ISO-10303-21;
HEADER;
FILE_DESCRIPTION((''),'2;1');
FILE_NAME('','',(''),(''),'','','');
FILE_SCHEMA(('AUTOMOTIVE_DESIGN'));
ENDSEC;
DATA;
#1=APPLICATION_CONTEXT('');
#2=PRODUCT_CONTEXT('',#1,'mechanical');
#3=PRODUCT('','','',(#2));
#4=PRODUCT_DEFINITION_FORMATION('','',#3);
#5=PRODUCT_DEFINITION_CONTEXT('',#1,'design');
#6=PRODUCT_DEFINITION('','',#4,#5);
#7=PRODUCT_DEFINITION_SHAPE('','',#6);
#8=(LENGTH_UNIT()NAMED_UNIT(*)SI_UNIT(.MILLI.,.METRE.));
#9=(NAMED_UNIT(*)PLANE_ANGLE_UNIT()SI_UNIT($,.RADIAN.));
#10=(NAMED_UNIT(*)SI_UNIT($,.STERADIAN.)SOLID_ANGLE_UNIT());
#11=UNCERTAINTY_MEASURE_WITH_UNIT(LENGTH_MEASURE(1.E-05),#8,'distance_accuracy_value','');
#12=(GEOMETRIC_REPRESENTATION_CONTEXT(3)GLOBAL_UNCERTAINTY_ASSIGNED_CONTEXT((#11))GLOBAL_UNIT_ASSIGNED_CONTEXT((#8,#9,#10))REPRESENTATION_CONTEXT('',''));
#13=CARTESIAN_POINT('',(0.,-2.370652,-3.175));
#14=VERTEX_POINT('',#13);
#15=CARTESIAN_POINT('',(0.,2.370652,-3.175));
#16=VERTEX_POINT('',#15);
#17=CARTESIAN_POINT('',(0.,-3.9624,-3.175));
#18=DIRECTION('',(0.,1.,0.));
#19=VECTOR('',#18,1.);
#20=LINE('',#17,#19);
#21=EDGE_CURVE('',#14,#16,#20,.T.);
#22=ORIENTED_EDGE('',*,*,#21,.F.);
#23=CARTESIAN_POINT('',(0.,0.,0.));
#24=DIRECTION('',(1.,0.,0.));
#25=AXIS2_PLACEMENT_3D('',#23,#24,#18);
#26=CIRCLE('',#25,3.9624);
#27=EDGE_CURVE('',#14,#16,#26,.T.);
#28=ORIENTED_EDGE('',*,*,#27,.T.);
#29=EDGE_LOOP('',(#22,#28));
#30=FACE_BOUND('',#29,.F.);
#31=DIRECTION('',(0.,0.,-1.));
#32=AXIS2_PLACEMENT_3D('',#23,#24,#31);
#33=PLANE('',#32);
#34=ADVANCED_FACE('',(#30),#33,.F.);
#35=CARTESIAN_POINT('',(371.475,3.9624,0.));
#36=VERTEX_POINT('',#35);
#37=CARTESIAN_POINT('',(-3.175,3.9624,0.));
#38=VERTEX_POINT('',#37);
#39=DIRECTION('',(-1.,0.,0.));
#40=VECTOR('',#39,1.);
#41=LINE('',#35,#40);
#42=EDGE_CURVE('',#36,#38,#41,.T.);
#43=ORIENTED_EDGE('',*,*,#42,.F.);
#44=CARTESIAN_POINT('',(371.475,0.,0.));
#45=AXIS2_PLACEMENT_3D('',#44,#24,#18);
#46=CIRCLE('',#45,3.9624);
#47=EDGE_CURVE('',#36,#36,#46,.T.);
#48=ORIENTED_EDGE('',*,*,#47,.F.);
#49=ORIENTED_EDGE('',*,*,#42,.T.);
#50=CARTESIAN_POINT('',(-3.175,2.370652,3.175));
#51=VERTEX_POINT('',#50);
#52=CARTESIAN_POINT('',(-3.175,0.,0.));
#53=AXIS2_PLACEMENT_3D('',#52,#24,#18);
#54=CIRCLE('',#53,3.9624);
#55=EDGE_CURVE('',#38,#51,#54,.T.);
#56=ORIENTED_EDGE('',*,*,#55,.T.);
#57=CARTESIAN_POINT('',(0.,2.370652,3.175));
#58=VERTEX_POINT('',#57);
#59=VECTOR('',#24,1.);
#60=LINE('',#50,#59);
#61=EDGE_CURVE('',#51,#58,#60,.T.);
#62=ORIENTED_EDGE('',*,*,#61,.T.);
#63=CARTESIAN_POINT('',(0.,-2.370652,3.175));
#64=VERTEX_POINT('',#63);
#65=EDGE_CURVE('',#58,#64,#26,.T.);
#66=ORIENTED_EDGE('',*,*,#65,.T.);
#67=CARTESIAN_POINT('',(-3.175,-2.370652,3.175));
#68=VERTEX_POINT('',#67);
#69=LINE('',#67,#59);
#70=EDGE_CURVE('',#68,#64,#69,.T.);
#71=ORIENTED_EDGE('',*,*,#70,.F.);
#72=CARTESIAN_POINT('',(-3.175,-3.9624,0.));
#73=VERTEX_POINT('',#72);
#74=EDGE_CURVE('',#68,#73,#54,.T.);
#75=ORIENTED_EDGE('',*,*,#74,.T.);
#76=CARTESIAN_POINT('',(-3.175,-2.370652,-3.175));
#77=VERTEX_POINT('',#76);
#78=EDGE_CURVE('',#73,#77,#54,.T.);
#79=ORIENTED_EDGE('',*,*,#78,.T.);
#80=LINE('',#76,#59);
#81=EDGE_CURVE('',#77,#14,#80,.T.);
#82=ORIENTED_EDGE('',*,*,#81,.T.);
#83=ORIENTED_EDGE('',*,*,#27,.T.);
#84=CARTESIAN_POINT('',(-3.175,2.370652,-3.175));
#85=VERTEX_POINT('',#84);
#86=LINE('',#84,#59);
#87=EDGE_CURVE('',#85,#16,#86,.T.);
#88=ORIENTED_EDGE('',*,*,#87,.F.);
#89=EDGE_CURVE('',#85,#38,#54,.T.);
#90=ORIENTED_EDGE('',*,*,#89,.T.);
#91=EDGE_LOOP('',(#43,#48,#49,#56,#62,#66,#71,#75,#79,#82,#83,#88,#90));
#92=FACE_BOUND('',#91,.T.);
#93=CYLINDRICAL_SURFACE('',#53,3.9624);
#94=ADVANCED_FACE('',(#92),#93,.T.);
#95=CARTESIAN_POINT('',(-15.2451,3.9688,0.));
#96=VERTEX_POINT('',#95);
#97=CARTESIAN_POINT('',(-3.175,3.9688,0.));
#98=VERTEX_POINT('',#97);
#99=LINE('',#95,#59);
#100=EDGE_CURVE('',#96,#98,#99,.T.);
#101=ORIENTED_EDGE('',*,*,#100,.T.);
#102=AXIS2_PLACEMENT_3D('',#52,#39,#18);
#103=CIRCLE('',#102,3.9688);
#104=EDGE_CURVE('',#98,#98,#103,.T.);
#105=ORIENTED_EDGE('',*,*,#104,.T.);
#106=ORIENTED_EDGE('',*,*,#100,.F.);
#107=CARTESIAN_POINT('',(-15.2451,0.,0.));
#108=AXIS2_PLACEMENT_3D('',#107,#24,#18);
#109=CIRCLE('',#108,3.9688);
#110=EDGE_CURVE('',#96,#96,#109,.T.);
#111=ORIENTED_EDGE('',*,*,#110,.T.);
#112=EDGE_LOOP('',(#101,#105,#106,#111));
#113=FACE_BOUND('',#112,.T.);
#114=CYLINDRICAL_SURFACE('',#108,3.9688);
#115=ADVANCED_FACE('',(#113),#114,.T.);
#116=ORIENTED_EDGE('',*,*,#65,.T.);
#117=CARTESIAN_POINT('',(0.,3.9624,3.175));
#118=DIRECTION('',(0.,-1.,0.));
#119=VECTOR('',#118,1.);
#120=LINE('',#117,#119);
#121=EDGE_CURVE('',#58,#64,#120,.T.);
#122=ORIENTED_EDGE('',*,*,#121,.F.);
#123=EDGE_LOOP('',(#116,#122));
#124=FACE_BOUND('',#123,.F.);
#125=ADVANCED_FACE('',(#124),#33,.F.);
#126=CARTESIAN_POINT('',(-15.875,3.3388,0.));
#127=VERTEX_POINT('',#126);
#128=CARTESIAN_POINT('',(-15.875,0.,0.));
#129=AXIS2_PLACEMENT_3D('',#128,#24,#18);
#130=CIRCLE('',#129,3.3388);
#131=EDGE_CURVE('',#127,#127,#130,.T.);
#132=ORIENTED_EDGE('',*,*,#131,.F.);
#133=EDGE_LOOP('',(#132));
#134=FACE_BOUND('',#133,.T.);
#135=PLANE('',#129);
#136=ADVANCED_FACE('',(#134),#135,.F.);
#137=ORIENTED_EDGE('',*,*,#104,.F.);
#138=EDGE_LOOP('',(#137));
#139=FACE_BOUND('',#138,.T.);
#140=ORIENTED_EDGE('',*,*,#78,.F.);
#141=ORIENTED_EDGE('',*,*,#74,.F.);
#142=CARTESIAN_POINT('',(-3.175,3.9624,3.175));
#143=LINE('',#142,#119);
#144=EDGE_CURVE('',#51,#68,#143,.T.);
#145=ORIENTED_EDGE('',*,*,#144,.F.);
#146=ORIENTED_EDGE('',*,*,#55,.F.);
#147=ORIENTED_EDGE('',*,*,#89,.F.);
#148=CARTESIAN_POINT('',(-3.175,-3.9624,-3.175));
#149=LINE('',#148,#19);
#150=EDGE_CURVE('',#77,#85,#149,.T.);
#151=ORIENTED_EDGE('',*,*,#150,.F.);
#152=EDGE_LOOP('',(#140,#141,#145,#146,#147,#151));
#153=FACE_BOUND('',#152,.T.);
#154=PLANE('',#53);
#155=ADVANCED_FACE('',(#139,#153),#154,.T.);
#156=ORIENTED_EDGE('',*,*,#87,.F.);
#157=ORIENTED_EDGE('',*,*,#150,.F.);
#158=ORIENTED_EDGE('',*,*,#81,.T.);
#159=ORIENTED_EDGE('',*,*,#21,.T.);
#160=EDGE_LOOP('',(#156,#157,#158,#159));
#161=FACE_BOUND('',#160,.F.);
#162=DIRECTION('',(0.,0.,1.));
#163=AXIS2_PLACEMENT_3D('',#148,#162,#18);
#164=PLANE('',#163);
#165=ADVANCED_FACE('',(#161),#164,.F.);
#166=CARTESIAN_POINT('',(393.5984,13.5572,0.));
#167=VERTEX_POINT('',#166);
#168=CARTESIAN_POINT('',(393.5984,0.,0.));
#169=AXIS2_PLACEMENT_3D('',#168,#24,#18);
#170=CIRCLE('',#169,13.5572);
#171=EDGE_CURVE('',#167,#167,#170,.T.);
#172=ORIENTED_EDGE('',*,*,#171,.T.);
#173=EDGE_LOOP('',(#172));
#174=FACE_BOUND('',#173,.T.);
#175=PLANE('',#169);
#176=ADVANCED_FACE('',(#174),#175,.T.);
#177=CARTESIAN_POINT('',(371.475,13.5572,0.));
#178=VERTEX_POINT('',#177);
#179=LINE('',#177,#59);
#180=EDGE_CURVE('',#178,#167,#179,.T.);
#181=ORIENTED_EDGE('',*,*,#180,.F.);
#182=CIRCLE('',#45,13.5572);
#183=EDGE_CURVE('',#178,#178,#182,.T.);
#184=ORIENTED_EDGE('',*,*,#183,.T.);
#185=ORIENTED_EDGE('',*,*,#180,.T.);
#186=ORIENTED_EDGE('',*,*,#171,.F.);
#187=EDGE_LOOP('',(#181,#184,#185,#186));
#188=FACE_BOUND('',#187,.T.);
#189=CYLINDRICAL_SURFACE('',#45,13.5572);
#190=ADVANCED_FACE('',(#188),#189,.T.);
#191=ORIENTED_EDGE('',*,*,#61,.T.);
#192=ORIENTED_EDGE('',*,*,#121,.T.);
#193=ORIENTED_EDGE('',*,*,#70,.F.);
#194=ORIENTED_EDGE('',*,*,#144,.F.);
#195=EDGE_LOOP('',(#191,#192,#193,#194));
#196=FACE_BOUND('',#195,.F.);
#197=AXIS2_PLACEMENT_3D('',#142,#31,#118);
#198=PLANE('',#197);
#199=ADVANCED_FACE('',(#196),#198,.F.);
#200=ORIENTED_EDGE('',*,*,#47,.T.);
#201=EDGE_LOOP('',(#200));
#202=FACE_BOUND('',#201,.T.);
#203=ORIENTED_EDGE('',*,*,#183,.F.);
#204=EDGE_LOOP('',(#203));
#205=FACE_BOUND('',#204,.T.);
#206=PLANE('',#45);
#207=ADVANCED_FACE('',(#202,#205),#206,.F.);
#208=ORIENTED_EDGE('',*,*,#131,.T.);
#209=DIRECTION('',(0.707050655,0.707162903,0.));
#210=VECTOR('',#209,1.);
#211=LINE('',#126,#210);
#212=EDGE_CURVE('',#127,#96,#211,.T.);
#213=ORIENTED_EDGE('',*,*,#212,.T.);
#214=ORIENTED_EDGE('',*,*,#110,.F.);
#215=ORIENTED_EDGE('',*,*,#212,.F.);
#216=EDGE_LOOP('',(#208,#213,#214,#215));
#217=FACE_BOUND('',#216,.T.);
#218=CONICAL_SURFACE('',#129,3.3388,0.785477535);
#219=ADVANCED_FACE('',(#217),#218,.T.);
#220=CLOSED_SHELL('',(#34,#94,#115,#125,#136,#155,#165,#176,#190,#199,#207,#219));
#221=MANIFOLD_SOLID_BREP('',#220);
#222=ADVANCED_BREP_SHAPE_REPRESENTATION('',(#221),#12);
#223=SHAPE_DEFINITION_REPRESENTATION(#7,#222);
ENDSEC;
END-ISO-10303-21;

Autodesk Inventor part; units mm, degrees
sketch "Sketch_1" plane through (0, 0, 0) normal (0, 0, 1) x (1, 0, 0)
  line L0 (393.5984, 0) -> (-3.175, 0)
  line L1 (-3.175, 0) -> (-3.175, 3.9624)
  line L2 (-3.175, 3.9624) -> (371.475, 3.9624)
  line L3 (371.475, 3.9624) -> (371.475, 13.5572)
  line L4 (371.475, 13.5572) -> (393.5984, 13.5572)
  line L5 (393.5984, 13.5572) -> (393.5984, 0)
  line L6 (393.5984, 0) -> (-3.175, 0)
revolve "Revolution1" add sketch "Sketch_1" angle 360 about axis through (393.5984, 0, 0) along (1, 0, 0)
sketch "Sketch_3" plane through (0, 0, 0) normal (0, 0, 1) x (1, 0, 0)
  line L0 (-3.175, 0) -> (-15.875, 0)
  line L1 (-15.875, 0) -> (-15.875, 3.3388)
  line L2 (-15.875, 3.3388) -> (-15.2451, 3.9688)
  line L3 (-15.2451, 3.9688) -> (-3.175, 3.9688)
  line L4 (-3.175, 3.9688) -> (-3.175, 0)
  line L5 (-3.175, 0) -> (-15.875, 0)
revolve "Revolution2" add sketch "Sketch_3" angle 360 about axis through (-3.175, 0, 0) along (1, 0, 0)
thread "Thread1" size "5/16-20 UN" class "3A" standard "ANSI Unified Screw Threads" full length
sketch "Sketch_10" plane through (-3.175, 0, 0) normal (1, 0, 0) x (0, 0, -1)
  line L0 (-7.9248, 7.9248) -> (-7.9248, -7.9248)
  line L1 (-7.9248, -7.9248) -> (7.9248, -7.9248)
  line L2 (7.9248, -7.9248) -> (7.9248, 7.9248)
  line L3 (7.9248, 7.9248) -> (-7.9248, 7.9248)
  line L4 (-3.175, 3.9624) -> (-3.175, -3.9624)
  line L5 (-3.175, -3.9624) -> (3.175, -3.9624)
  line L6 (3.175, -3.9624) -> (3.175, 3.9624)
  line L7 (3.175, 3.9624) -> (-3.175, 3.9624)
extrude "Extrusion1" cut sketch "Sketch_10" along normal blind 3.175
ref_plane "rod_cp_XY" through (0, 0, 0) normal (1, 0, 0) x (0, 0, -1)
ref_plane "rod_cp_YZ" through (0, 0, 0) normal (0, 0, -1) x (0, 1, 0)
ref_plane "rod_cp_ZX" through (0, 0, 0) normal (0, 1, 0) x (1, 0, 0)
ref_plane "to_rod_clevis_XY" through (-15.875, 0, 0) normal (1, 0, 0) x (0, 0, -1)
ref_plane "to_rod_clevis_YZ" through (-15.875, 0, 0) normal (0, 0, -1) x (0, 1, 0)
ref_plane "to_rod_clevis_ZX" through (-15.875, 0, 0) normal (0, 1, 0) x (1, 0, 0)
ref_plane "rl2_XY" through (-3.175, 0, 0) normal (1, 0, 0) x (0, 0, -1)
ref_plane "rl2_YZ" through (-3.175, 0, 0) normal (0, 0, -1) x (0, 1, 0)
ref_plane "rl2_ZX" through (-3.175, 0, 0) normal (0, 1, 0) x (1, 0, 0)
ref_plane "rl1_XY" through (-15.875, 0, 0) normal (1, 0, 0) x (0, 0, -1)
ref_plane "rl1_YZ" through (-15.875, 0, 0) normal (0, 0, -1) x (0, 1, 0)
ref_plane "rl1_ZX" through (-15.875, 0, 0) normal (0, 1, 0) x (1, 0, 0)
ref_plane "thd1_XY" through (-15.875, 3.9688, 0) normal (1, 0, 0) x (0, 0, -1)
ref_plane "thd1_YZ" through (-15.875, 3.9688, 0) normal (0, 0, -1) x (0, 1, 0)
ref_plane "thd1_ZX" through (-15.875, 3.9688, 0) normal (0, 1, 0) x (1, 0, 0)
ref_plane "thd2_XY" through (-15.875, -3.9688, 0) normal (1, 0, 0) x (0, 0, -1)
ref_plane "thd2_YZ" through (-15.875, -3.9688, 0) normal (0, 0, -1) x (0, 1, 0)
ref_plane "thd2_ZX" through (-15.875, -3.9688, 0) normal (0, 1, 0) x (1, 0, 0)
ref_plane "dia1_XY" through (-3.175, 3.9624, 0) normal (1, 0, 0) x (0, 0, -1)
ref_plane "dia1_YZ" through (-3.175, 3.9624, 0) normal (0, 0, -1) x (0, 1, 0)
ref_plane "dia1_ZX" through (-3.175, 3.9624, 0) normal (0, 1, 0) x (1, 0, 0)
ref_plane "dia2_XY" through (-3.175, -3.9624, 0) normal (1, 0, 0) x (0, 0, -1)
ref_plane "dia2_YZ" through (-3.175, -3.9624, 0) normal (0, 0, -1) x (0, 1, 0)
ref_plane "dia2_ZX" through (-3.175, -3.9624, 0) normal (0, 1, 0) x (1, 0, 0)
ref_plane "wf1_XY" through (-3.175, 0, 0) normal (1, 0, 0) x (0, 0, -1)
ref_plane "wf1_YZ" through (-3.175, 0, 0) normal (0, 0, -1) x (0, 1, 0)
ref_plane "wf1_ZX" through (-3.175, 0, 0) normal (0, 1, 0) x (1, 0, 0)
ref_plane "wf2_XY" through (0, 0, 0) normal (1, 0, 0) x (0, 0, -1)
ref_plane "wf2_YZ" through (0, 0, 0) normal (0, 0, -1) x (0, 1, 0)
ref_plane "wf2_ZX" through (0, 0, 0) normal (0, 1, 0) x (1, 0, 0)
ref_plane "hh1_XY" through (421.3606, 0, 0) normal (0, 0, 1) x (1, 0, 0)
ref_plane "hh1_YZ" through (421.3606, 0, 0) normal (1, 0, 0) x (0, 1, 0)
ref_plane "hh1_ZX" through (421.3606, 0, 0) normal (0, 1, 0) x (0, 0, 1)
ref_plane "hh2_XY" through (427.7614, 0, 0) normal (0, 0, 1) x (1, 0, 0)
ref_plane "hh2_YZ" through (427.7614, 0, 0) normal (1, 0, 0) x (0, 1, 0)
ref_plane "hh2_ZX" through (427.7614, 0, 0) normal (0, 1, 0) x (0, 0, 1)
ref_plane "dia12_XY" through (0, 0, 14.1351) normal (1, 0, 0) x (0, 0, -1)
ref_plane "dia12_YZ" through (0, 0, 14.1351) normal (0, 0, -1) x (0, 1, 0)
ref_plane "dia12_ZX" through (0, 0, 14.1351) normal (0, 1, 0) x (1, 0, 0)
ref_plane "dia22_XY" through (0, 0, -14.1351) normal (1, 0, 0) x (0, 0, -1)
ref_plane "dia22_YZ" through (0, 0, -14.1351) normal (0, 0, -1) x (0, 1, 0)
ref_plane "dia22_ZX" through (0, 0, -14.1351) normal (0, 1, 0) x (1, 0, 0)
ref_plane "wfw1_XY" through (-3.175, 0, -3.175) normal (0, 1, 0) x (1, 0, 0)
ref_plane "wfw1_YZ" through (-3.175, 0, -3.175) normal (1, 0, 0) x (0, 0, -1)
ref_plane "wfw1_ZX" through (-3.175, 0, -3.175) normal (0, 0, -1) x (0, 1, 0)
ref_plane "wfw2_XY" through (-3.175, 0, 3.175) normal (0, 1, 0) x (1, 0, 0)
ref_plane "wfw2_YZ" through (-3.175, 0, 3.175) normal (1, 0, 0) x (0, 0, -1)
ref_plane "wfw2_ZX" through (-3.175, 0, 3.175) normal (0, 0, -1) x (0, 1, 0)
properties part number "0913-DX0_rod"
